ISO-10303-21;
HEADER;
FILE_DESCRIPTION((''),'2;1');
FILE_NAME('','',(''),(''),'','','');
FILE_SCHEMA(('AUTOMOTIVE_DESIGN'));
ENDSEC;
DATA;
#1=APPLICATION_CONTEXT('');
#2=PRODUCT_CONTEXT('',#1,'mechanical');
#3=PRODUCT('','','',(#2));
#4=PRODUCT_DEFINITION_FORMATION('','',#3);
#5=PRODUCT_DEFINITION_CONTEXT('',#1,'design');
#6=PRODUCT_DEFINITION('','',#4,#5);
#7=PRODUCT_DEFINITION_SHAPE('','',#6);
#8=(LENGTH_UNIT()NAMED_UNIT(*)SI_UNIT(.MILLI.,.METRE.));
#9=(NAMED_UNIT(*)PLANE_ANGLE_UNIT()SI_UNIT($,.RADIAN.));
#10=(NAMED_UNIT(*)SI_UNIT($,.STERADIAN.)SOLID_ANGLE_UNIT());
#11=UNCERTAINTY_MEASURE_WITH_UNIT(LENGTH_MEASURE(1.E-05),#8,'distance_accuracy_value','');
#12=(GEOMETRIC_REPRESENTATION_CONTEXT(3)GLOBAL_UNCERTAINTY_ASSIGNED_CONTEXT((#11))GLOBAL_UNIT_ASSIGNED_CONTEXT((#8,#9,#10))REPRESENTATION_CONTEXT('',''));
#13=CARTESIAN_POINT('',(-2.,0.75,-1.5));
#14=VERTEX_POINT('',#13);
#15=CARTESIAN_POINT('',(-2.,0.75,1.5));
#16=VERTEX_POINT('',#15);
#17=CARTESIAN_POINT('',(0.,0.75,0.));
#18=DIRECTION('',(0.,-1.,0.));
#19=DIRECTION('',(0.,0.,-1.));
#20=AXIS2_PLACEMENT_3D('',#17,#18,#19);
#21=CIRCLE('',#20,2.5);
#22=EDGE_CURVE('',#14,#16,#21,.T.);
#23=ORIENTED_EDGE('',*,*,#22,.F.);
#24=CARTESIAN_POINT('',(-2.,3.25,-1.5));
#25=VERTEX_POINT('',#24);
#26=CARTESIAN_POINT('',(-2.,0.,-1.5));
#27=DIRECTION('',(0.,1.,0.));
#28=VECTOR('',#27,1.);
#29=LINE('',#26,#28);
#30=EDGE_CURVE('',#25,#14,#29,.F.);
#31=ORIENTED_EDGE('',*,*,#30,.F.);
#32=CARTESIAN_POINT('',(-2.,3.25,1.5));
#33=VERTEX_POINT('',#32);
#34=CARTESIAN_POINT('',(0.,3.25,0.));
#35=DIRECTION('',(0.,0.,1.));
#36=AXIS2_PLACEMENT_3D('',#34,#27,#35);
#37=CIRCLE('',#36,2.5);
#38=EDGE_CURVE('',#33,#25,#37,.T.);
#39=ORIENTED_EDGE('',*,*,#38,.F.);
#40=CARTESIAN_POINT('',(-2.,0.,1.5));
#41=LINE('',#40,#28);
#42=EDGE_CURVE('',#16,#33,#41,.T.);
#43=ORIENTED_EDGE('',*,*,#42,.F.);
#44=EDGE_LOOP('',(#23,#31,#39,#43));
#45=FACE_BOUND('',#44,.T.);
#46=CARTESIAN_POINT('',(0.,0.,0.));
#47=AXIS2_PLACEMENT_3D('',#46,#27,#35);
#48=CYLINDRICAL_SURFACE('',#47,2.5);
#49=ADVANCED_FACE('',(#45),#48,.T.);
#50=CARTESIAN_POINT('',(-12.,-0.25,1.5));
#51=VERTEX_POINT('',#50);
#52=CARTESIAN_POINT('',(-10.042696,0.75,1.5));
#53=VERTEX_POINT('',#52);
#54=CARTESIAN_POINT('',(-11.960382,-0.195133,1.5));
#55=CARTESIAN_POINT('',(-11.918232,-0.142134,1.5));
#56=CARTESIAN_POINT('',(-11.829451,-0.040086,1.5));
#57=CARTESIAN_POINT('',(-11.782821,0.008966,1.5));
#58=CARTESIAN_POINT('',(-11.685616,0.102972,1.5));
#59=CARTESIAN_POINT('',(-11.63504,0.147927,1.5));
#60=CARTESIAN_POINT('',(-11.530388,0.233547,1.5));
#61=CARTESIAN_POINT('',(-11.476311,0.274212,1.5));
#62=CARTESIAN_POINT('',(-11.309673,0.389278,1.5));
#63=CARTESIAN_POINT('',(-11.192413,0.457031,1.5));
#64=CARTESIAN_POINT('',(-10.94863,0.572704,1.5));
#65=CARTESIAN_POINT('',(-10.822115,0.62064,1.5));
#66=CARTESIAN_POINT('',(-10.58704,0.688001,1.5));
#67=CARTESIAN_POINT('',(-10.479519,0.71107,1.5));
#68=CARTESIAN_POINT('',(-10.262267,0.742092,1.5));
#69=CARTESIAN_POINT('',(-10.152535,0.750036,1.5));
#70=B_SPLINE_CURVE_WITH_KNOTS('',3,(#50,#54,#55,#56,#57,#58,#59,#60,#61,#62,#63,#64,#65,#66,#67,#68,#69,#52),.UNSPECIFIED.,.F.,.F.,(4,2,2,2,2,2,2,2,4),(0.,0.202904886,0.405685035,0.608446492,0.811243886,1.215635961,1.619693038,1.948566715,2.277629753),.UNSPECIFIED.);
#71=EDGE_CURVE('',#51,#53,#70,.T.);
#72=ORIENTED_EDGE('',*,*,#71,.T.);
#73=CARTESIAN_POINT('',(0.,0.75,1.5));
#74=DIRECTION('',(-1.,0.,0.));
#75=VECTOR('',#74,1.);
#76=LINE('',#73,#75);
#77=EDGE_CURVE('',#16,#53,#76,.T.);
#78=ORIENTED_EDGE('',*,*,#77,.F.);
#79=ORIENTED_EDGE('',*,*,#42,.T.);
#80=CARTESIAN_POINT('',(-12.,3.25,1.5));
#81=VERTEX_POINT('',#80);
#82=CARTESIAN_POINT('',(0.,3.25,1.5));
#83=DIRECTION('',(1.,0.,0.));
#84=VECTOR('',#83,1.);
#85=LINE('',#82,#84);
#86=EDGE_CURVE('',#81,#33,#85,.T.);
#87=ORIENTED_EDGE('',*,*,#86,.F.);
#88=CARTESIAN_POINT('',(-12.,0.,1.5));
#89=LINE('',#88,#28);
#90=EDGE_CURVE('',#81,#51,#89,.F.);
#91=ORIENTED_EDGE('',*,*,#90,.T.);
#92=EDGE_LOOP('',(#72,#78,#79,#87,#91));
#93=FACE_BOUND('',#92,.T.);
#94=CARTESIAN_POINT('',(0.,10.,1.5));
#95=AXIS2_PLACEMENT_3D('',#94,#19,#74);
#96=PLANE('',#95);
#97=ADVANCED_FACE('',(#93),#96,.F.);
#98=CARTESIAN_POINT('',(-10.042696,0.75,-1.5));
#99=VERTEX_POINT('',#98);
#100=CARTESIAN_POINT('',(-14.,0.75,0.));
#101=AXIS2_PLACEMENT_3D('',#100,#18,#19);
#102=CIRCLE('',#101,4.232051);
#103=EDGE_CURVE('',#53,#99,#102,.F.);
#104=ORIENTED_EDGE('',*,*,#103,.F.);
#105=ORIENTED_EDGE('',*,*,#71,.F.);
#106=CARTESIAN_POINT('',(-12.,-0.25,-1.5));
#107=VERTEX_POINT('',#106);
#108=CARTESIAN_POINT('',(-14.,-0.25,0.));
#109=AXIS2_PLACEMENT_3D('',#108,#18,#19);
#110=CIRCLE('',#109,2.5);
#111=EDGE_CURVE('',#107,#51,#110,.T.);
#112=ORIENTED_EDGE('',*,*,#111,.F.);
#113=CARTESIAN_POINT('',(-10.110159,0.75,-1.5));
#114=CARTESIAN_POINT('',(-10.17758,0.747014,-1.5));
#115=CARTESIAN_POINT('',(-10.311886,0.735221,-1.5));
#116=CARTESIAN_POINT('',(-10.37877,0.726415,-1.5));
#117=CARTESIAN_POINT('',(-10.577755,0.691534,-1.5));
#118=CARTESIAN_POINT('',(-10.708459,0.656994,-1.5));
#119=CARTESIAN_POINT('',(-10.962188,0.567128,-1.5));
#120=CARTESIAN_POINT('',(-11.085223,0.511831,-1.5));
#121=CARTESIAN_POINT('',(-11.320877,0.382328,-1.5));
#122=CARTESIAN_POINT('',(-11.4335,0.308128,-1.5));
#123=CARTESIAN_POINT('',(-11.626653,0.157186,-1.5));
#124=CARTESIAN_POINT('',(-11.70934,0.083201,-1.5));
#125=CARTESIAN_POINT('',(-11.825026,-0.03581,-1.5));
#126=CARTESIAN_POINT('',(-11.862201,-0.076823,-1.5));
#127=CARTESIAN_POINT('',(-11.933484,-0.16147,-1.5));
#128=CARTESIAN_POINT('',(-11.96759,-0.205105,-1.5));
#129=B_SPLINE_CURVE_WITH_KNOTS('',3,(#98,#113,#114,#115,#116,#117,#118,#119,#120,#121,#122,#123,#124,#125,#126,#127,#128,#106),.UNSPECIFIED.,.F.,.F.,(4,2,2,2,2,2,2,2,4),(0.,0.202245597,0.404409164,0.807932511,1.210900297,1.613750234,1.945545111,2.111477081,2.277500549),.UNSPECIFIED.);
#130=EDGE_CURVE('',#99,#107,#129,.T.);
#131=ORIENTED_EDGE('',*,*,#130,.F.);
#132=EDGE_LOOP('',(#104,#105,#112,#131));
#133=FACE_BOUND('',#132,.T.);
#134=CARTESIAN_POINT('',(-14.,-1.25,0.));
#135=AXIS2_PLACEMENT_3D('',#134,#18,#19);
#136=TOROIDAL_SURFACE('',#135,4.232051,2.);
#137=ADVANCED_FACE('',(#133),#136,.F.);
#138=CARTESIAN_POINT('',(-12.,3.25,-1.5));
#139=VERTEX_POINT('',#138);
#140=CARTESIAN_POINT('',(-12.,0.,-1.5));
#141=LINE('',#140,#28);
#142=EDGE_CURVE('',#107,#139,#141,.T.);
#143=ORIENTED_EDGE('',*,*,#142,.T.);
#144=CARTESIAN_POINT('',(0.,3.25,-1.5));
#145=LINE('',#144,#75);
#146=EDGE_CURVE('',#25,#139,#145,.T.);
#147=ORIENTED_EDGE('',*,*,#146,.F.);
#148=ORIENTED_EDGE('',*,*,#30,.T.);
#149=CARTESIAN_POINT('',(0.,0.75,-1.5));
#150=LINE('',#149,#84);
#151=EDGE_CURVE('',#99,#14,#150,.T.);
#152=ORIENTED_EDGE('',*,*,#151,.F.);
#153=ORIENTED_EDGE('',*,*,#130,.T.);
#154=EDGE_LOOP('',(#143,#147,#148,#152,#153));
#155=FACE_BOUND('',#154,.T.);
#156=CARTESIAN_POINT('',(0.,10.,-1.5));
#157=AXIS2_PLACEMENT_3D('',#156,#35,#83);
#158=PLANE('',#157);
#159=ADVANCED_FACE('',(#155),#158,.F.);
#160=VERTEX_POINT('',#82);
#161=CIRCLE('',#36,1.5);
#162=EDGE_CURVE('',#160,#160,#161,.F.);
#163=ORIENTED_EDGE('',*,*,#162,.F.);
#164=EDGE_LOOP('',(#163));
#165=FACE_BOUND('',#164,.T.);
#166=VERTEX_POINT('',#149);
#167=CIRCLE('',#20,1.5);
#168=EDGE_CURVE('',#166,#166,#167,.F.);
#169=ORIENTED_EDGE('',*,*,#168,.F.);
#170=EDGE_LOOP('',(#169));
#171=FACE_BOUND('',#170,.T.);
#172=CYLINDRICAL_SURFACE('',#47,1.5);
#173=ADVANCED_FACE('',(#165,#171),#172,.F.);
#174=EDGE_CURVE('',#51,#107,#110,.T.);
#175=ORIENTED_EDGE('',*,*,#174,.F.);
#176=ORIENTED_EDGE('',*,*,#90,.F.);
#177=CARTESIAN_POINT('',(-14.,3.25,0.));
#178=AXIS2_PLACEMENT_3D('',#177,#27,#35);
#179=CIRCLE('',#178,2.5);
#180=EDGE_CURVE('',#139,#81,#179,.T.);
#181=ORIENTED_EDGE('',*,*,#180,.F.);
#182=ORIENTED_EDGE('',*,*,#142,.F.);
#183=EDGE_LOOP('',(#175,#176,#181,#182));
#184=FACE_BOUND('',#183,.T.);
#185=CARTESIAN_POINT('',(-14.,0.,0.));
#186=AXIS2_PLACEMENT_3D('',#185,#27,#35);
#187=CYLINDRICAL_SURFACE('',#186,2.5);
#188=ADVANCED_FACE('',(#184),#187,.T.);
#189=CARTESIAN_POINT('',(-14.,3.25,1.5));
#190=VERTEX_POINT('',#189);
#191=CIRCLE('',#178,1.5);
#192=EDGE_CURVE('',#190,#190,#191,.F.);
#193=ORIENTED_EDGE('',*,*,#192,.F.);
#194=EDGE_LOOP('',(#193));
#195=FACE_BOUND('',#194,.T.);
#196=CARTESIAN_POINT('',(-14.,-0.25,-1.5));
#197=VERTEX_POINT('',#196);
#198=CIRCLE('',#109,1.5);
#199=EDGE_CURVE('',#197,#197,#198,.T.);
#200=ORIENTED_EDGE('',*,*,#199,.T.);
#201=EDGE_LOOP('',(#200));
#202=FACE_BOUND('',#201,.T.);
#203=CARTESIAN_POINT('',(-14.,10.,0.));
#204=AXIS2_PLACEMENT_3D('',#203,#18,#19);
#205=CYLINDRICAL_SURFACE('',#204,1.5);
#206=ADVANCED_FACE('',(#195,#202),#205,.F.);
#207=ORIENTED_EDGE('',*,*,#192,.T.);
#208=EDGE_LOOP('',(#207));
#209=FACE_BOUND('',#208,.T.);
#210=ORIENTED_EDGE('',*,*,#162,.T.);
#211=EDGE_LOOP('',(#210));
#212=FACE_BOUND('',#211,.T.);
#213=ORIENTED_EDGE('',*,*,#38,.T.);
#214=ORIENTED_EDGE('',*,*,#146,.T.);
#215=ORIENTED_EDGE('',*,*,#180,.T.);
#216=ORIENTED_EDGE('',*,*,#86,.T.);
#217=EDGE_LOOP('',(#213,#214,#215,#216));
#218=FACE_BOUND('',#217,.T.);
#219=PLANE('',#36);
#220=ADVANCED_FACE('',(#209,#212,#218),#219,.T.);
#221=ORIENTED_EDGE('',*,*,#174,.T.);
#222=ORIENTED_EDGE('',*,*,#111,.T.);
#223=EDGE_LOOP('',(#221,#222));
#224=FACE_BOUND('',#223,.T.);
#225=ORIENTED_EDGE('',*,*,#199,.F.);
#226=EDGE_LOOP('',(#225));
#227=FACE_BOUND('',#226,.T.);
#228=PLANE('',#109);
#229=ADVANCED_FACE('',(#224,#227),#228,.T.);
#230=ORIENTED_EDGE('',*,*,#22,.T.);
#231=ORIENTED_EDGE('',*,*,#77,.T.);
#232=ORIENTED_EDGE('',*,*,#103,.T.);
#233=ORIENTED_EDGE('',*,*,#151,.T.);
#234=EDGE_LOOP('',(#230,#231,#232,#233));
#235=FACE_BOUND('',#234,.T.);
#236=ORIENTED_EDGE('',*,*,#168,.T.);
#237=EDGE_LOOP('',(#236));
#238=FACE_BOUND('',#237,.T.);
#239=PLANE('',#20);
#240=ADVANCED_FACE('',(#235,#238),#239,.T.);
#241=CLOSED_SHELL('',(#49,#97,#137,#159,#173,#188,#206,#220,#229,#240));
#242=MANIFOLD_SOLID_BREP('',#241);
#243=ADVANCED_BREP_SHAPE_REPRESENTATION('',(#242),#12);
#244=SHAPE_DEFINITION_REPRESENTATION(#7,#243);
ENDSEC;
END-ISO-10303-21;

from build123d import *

# Parameters (mm, degrees)
BOSS_EXTRUDE1_DEPTH = 10
BOSS_EXTRUDE2_START = -10
SKETCH3_R           = 2.5
SKETCH3_R_2         = 2
BOSS_EXTRUDE2_DEPTH = 10
MOVE_FACE1_BY       = 5
SKETCH4_R           = 2.5
SKETCH4_R_2         = 1.5
BOSS_EXTRUDE3_DEPTH = 5
SKETCH5_R           = 1.5
CUT_EXTRUDE1_DEPTH  = 5
MOVE_FACE2_BY       = 1
SKETCH11_R          = 1.5
CUT_EXTRUDE2_DEPTH  = 0.75
SKETCH12_R          = 1.5
CUT_EXTRUDE3_DEPTH  = 0.75
FILLET1_R           = 1
SKETCH13_W          = 8
SKETCH13_H          = 3
CUT_EXTRUDE4_DEPTH  = 0.75
SKETCH14_W          = 8
SKETCH14_H          = 3
CUT_EXTRUDE5_DEPTH  = 0.75
BOSS_EXTRUDE6_START = 1
SKETCH16_R          = 2.5
SKETCH16_R_2        = 1.5
BOSS_EXTRUDE6_DEPTH = 1
FILLET3_R           = 2


with BuildPart() as part:
    # Sketch2 → Boss-Extrude1 (new body)
    with BuildSketch(Plane(origin=(0, 0, 0), x_dir=(1, 0, 0), z_dir=(0, 1, 0))):
        with BuildLine():
            Line((0, -1.5), (0, 0))
            Line((0, 0), (-12, 0))
            ThreePointArc((-12, 0), (-12.177124344, -0.822875656), (-12.677124344, -1.5))
            Line((-12.677124344, -1.5), (0, -1.5))
        make_face()
        with BuildLine():
            Line((-12, 0), (0, 0))
            Line((0, 0), (0, 1.5))
            Line((0, 1.5), (-12.677124344, 1.5))
            ThreePointArc((-12.677124344, 1.5), (-12.177124344, 0.822875656), (-12, 0))
        make_face()
        with BuildLine():
            ThreePointArc((-12.677124344, -1.5), (-12.177124344, -0.822875656), (-12, 0))
            Line((-12, 0), (-12.5, 0))
            ThreePointArc((-12.5, 0), (-12.544954729, -0.364476691), (-12.677124344, -0.707106781))
            Line((-12.677124344, -0.707106781), (-12.677124344, -1.5))
        make_face()
        with BuildLine():
            Line((-12.5, 0), (-12, 0))
            ThreePointArc((-12, 0), (-12.177124344, 0.822875656), (-12.677124344, 1.5))
            Line((-12.677124344, 1.5), (-12.677124344, 0.707106781))
            ThreePointArc((-12.677124344, 0.707106781), (-12.544954729, 0.364476691), (-12.5, 0))
        make_face()
        with BuildLine():
            Line((-12.677124344, 0.707106781), (-12.677124344, 1.5))
            ThreePointArc((-12.677124344, 1.5), (-13.292893219, 1.870828693), (-14, 2))
            Line((-14, 2), (-14, 1.5))
            ThreePointArc((-14, 1.5), (-13.228851562, 1.286596318), (-12.677124344, 0.707106781))
        make_face()
        with BuildLine():
            ThreePointArc((-14, -2), (-13.292893219, -1.870828693), (-12.677124344, -1.5))
            Line((-12.677124344, -1.5), (-12.677124344, -0.707106781))
            ThreePointArc((-12.677124344, -0.707106781), (-13.228851562, -1.286596318), (-14, -1.5))
            Line((-14, -1.5), (-14, -2))
        make_face()
        with BuildLine():
            Line((-14, 1.5), (-14, 2))
            ThreePointArc((-14, 2), (-15.414213562, 1.414213562), (-16, 0))
            Line((-16, 0), (-15.5, 0))
            ThreePointArc((-15.5, 0), (-15.060660172, 1.060660172), (-14, 1.5))
        make_face()
        with BuildLine():
            ThreePointArc((-16, 0), (-15.414213562, -1.414213562), (-14, -2))
            Line((-14, -2), (-14, -1.5))
            ThreePointArc((-14, -1.5), (-15.060660172, -1.060660172), (-15.5, 0))
            Line((-15.5, 0), (-16, 0))
        make_face()
    extrude(amount=BOSS_EXTRUDE1_DEPTH)

    # Sketch3 → Boss-Extrude2 (add)
    with BuildSketch(Plane(origin=(0, 10, 0), x_dir=(1, 0, 0), z_dir=(0, 1, 0)).offset(BOSS_EXTRUDE2_START)):
        with Locations((-14, 0)):
            Circle(SKETCH3_R)
        with Locations((-14, 0)):
            Circle(SKETCH3_R_2, mode=Mode.SUBTRACT)
    extrude(amount=BOSS_EXTRUDE2_DEPTH)

    # Move Face1: a face moved inward by 5.0
    extrude(part.faces().sort_by_distance((-7.989839666, 10, 0))[0], amount=MOVE_FACE1_BY, dir=(0, -1, 0), mode=Mode.SUBTRACT)

    # Sketch4 → Boss-Extrude3 (add)
    with BuildSketch(Plane(origin=(0, 5, 0), x_dir=(1, 0, 0), z_dir=(0, 1, 0))):
        Circle(SKETCH4_R)
        Circle(SKETCH4_R_2, mode=Mode.SUBTRACT)
    extrude(amount=-BOSS_EXTRUDE3_DEPTH)

    # Sketch5 → Cut-Extrude1 (cut)
    with BuildSketch(Plane(origin=(0, 5, 0), x_dir=(1, 0, 0), z_dir=(0, 1, 0))):
        with Locations(Location((0, 0, 0), (0, 0, 270))):
            Circle(SKETCH5_R)
    extrude(amount=-CUT_EXTRUDE1_DEPTH, mode=Mode.SUBTRACT)

    # Move Face2: a face moved inward by 1.0
    extrude(part.faces().sort_by_distance((-7, 5, 0))[0], amount=MOVE_FACE2_BY, dir=(0, -1, 0), mode=Mode.SUBTRACT)

    # Sketch11 → Cut-Extrude2 (cut)
    # profile 1 of 2: a face of its own
    with BuildSketch(Plane(origin=(0, 4, 0), x_dir=(1, 0, 0), z_dir=(0, 1, 0))):
        with BuildLine():
            Line((-11, 0), (-11, 1.5))
            Line((-11, 1.5), (-12, 1.5))
            ThreePointArc((-12, 1.5), (-16.5, 0), (-12, -1.5))
            Line((-12, -1.5), (-11, -1.5))
            Line((-11, -1.5), (-11, 0))
        make_face()
        with Locations(Location((-14, 0, 0), (0, 0, 270))):
            Circle(SKETCH11_R, mode=Mode.SUBTRACT)
    # profile 2 of 2: a face of its own
    with BuildSketch(Plane(origin=(0, 4, 0), x_dir=(1, 0, 0), z_dir=(0, 1, 0))):
        with BuildLine():
            Line((-2, 1.5), (-3, 1.5))
            Line((-3, 1.5), (-3, 0))
            Line((-3, 0), (-3, -1.5))
            Line((-3, -1.5), (-2, -1.5))
            ThreePointArc((-2, -1.5), (2.5, 0), (-2, 1.5))
        make_face()
        with Locations(Location((0, 0, 0), (0, 0, 270))):
            Circle(SKETCH11_R, mode=Mode.SUBTRACT)
    extrude(amount=-CUT_EXTRUDE2_DEPTH, mode=Mode.SUBTRACT)

    # Sketch12 → Cut-Extrude3 (cut)
    # profile 1 of 2: a face of its own
    with BuildSketch(Plane(origin=(0, 0, 0), x_dir=(-1, 0, 0), z_dir=(0, -1, 0))):
        with BuildLine():
            Line((11, 1.5), (11, -1.5))
            Line((11, -1.5), (12, -1.5))
            ThreePointArc((12, -1.5), (16.5, 0), (12, 1.5))
            Line((12, 1.5), (11, 1.5))
        make_face()
        with Locations(Location((14, 0, 0), (0, 0, 90))):
            Circle(SKETCH12_R, mode=Mode.SUBTRACT)
    # profile 2 of 2: a face of its own
    with BuildSketch(Plane(origin=(0, 0, 0), x_dir=(-1, 0, 0), z_dir=(0, -1, 0))):
        with BuildLine():
            Line((2, -1.5), (3, -1.5))
            Line((3, -1.5), (3, 1.5))
            Line((3, 1.5), (2, 1.5))
            ThreePointArc((2, 1.5), (-2.5, 0), (2, -1.5))
        make_face()
        with Locations(Location((0, 0, 0), (0, 0, 270))):
            Circle(SKETCH12_R, mode=Mode.SUBTRACT)
    extrude(amount=-CUT_EXTRUDE3_DEPTH, mode=Mode.SUBTRACT)

    # Fillet1
    # the kernel refuses this fillet: 1 mm, written as the material it takes off along each edge
    with BuildSketch(Plane(origin=(-3, 0, 3.920614591), x_dir=(0, 1, 0), z_dir=(0, 0, -1))) as fillet1_piece_1:
        with BuildLine():
            CenterArc((1, -0.968245837), FILLET1_R, 104.477512186, 75.522487814)
            Line((0, -0.968245837), (-0.02, -0.968245837))
            Line((-0.02, -0.968245837), (-0.02, 0))
            Line((-0.02, 0), (0, 0.02))
            ThreePointArc((0, 0.02), (0.375, 0.02), (0.745, 0.019364917))
            Line((0.745, 0.019364917), (0.75, 0))
        make_face()
    extrude(amount=7.841229183, mode=Mode.SUBTRACT)
    with BuildSketch(Plane(origin=(-3, 4, 3.920614591), x_dir=(-1, 0, 0), z_dir=(0, 0, -1))) as fillet1_piece_2:
        with BuildLine():
            CenterArc((0.968245837, -1), FILLET1_R, 90, 75.522487814)
            Line((0, -0.75), (-0.019364917, -0.745))
            ThreePointArc((-0.019364917, -0.745), (-0.02, -0.375), (-0.02, 0))
            Line((-0.02, 0), (0, 0.02))
            Line((0, 0.02), (0.968245837, 0.02))
            Line((0.968245837, 0.02), (0.968245837, 0))
        make_face()
    extrude(amount=7.841229183, mode=Mode.SUBTRACT)
    with BuildSketch(Plane(origin=(-11, 0, -3.920614591), x_dir=(1, 0, 0), z_dir=(0, 0, 1))) as fillet1_piece_3:
        with BuildLine():
            CenterArc((0.968245837, 1), FILLET1_R, 194.477512186, 75.522487814)
            Line((0, 0.75), (-0.019364917, 0.745))
            ThreePointArc((-0.019364917, 0.745), (-0.02, 0.375), (-0.02, 0))
            Line((-0.02, 0), (0, -0.02))
            Line((0, -0.02), (0.968245837, -0.02))
            Line((0.968245837, -0.02), (0.968245837, 0))
        make_face()
    extrude(amount=7.841229183, mode=Mode.SUBTRACT)
    with BuildSketch(Plane(origin=(-11, 4, -3.920614591), x_dir=(0, -1, 0), z_dir=(0, 0, 1))) as fillet1_piece_4:
        with BuildLine():
            CenterArc((1, 0.968245837), FILLET1_R, 180, 75.522487814)
            Line((0, 0.968245837), (-0.02, 0.968245837))
            Line((-0.02, 0.968245837), (-0.02, 0))
            Line((-0.02, 0), (0, -0.02))
            ThreePointArc((0, -0.02), (0.375, -0.02), (0.745, -0.019364917))
            Line((0.745, -0.019364917), (0.75, 0))
        make_face()
    extrude(amount=7.841229183, mode=Mode.SUBTRACT)

    # Sketch13 → Cut-Extrude4 (cut)
    with BuildSketch(Plane(origin=(0, 0, 0), x_dir=(-1, 0, 0), z_dir=(0, -1, 0))):
        with Locations((7, 0)):
            Rectangle(SKETCH13_W, SKETCH13_H)
    extrude(amount=-CUT_EXTRUDE4_DEPTH, mode=Mode.SUBTRACT)

    # Sketch14 → Cut-Extrude5 (cut)
    with BuildSketch(Plane(origin=(0, 4, 0), x_dir=(1, 0, 0), z_dir=(0, 1, 0))):
        with Locations((-7, 0)):
            Rectangle(SKETCH14_W, SKETCH14_H)
    extrude(amount=-CUT_EXTRUDE5_DEPTH, mode=Mode.SUBTRACT)

    # Sketch16 → Boss-Extrude6 (add)
    with BuildSketch(Plane(origin=(0, 0.75, 0), x_dir=(-1, 0, 0), z_dir=(0, -1, 0)).offset(BOSS_EXTRUDE6_START)):
        with Locations(Location((14, 0, 0), (0, 0, 216.869897646))):
            Circle(SKETCH16_R)
        with Locations(Location((14, 0, 0), (0, 0, 90))):
            Circle(SKETCH16_R_2, mode=Mode.SUBTRACT)
    extrude(amount=-BOSS_EXTRUDE6_DEPTH)

    # Fillet3
    # the kernel refuses this fillet: 2 mm, written as the material it adds along each edge
    with BuildSketch(Plane(origin=(-14, 0.75, 0), x_dir=(-0.720984929131136, 0, -0.6929507428134924), z_dir=(-0.6929507428134924, 0, 0.720984929131136))) as fillet3_piece_1_section:
        with BuildLine():
            CenterArc((4.232050808, 2), FILLET3_R, 210, 60)
            Line((4.232050808, 0), (4.232050808, -0.04))
            Line((4.232050808, -0.04), (2.5, -0.04))
            Line((2.5, -0.04), (2.46, 0))
            ThreePointArc((2.46, 0), (2.46, 0.5), (2.465358984, 0.98))
            Line((2.465358984, 0.98), (2.5, 1))
        make_face()
    fillet3_piece_1 = revolve(axis=Axis((-14, 0.75, 0), (0, -1, 0)), revolution_arc=272.27171598, mode=Mode.PRIVATE)
    fillet3_piece_1 = split(fillet3_piece_1, bisect_by=Plane(origin=(-11.214858776, 0.489042262, 1.5), z_dir=(0, 0, -1)), keep=Keep.TOP, mode=Mode.PRIVATE)
    fillet3_piece_1 = split(fillet3_piece_1, bisect_by=Plane(origin=(-11.214858776, 0.489042262, -1.5), z_dir=(0, 0, 1)), keep=Keep.TOP, mode=Mode.PRIVATE)
    add(fillet3_piece_1)


solid = part.part
